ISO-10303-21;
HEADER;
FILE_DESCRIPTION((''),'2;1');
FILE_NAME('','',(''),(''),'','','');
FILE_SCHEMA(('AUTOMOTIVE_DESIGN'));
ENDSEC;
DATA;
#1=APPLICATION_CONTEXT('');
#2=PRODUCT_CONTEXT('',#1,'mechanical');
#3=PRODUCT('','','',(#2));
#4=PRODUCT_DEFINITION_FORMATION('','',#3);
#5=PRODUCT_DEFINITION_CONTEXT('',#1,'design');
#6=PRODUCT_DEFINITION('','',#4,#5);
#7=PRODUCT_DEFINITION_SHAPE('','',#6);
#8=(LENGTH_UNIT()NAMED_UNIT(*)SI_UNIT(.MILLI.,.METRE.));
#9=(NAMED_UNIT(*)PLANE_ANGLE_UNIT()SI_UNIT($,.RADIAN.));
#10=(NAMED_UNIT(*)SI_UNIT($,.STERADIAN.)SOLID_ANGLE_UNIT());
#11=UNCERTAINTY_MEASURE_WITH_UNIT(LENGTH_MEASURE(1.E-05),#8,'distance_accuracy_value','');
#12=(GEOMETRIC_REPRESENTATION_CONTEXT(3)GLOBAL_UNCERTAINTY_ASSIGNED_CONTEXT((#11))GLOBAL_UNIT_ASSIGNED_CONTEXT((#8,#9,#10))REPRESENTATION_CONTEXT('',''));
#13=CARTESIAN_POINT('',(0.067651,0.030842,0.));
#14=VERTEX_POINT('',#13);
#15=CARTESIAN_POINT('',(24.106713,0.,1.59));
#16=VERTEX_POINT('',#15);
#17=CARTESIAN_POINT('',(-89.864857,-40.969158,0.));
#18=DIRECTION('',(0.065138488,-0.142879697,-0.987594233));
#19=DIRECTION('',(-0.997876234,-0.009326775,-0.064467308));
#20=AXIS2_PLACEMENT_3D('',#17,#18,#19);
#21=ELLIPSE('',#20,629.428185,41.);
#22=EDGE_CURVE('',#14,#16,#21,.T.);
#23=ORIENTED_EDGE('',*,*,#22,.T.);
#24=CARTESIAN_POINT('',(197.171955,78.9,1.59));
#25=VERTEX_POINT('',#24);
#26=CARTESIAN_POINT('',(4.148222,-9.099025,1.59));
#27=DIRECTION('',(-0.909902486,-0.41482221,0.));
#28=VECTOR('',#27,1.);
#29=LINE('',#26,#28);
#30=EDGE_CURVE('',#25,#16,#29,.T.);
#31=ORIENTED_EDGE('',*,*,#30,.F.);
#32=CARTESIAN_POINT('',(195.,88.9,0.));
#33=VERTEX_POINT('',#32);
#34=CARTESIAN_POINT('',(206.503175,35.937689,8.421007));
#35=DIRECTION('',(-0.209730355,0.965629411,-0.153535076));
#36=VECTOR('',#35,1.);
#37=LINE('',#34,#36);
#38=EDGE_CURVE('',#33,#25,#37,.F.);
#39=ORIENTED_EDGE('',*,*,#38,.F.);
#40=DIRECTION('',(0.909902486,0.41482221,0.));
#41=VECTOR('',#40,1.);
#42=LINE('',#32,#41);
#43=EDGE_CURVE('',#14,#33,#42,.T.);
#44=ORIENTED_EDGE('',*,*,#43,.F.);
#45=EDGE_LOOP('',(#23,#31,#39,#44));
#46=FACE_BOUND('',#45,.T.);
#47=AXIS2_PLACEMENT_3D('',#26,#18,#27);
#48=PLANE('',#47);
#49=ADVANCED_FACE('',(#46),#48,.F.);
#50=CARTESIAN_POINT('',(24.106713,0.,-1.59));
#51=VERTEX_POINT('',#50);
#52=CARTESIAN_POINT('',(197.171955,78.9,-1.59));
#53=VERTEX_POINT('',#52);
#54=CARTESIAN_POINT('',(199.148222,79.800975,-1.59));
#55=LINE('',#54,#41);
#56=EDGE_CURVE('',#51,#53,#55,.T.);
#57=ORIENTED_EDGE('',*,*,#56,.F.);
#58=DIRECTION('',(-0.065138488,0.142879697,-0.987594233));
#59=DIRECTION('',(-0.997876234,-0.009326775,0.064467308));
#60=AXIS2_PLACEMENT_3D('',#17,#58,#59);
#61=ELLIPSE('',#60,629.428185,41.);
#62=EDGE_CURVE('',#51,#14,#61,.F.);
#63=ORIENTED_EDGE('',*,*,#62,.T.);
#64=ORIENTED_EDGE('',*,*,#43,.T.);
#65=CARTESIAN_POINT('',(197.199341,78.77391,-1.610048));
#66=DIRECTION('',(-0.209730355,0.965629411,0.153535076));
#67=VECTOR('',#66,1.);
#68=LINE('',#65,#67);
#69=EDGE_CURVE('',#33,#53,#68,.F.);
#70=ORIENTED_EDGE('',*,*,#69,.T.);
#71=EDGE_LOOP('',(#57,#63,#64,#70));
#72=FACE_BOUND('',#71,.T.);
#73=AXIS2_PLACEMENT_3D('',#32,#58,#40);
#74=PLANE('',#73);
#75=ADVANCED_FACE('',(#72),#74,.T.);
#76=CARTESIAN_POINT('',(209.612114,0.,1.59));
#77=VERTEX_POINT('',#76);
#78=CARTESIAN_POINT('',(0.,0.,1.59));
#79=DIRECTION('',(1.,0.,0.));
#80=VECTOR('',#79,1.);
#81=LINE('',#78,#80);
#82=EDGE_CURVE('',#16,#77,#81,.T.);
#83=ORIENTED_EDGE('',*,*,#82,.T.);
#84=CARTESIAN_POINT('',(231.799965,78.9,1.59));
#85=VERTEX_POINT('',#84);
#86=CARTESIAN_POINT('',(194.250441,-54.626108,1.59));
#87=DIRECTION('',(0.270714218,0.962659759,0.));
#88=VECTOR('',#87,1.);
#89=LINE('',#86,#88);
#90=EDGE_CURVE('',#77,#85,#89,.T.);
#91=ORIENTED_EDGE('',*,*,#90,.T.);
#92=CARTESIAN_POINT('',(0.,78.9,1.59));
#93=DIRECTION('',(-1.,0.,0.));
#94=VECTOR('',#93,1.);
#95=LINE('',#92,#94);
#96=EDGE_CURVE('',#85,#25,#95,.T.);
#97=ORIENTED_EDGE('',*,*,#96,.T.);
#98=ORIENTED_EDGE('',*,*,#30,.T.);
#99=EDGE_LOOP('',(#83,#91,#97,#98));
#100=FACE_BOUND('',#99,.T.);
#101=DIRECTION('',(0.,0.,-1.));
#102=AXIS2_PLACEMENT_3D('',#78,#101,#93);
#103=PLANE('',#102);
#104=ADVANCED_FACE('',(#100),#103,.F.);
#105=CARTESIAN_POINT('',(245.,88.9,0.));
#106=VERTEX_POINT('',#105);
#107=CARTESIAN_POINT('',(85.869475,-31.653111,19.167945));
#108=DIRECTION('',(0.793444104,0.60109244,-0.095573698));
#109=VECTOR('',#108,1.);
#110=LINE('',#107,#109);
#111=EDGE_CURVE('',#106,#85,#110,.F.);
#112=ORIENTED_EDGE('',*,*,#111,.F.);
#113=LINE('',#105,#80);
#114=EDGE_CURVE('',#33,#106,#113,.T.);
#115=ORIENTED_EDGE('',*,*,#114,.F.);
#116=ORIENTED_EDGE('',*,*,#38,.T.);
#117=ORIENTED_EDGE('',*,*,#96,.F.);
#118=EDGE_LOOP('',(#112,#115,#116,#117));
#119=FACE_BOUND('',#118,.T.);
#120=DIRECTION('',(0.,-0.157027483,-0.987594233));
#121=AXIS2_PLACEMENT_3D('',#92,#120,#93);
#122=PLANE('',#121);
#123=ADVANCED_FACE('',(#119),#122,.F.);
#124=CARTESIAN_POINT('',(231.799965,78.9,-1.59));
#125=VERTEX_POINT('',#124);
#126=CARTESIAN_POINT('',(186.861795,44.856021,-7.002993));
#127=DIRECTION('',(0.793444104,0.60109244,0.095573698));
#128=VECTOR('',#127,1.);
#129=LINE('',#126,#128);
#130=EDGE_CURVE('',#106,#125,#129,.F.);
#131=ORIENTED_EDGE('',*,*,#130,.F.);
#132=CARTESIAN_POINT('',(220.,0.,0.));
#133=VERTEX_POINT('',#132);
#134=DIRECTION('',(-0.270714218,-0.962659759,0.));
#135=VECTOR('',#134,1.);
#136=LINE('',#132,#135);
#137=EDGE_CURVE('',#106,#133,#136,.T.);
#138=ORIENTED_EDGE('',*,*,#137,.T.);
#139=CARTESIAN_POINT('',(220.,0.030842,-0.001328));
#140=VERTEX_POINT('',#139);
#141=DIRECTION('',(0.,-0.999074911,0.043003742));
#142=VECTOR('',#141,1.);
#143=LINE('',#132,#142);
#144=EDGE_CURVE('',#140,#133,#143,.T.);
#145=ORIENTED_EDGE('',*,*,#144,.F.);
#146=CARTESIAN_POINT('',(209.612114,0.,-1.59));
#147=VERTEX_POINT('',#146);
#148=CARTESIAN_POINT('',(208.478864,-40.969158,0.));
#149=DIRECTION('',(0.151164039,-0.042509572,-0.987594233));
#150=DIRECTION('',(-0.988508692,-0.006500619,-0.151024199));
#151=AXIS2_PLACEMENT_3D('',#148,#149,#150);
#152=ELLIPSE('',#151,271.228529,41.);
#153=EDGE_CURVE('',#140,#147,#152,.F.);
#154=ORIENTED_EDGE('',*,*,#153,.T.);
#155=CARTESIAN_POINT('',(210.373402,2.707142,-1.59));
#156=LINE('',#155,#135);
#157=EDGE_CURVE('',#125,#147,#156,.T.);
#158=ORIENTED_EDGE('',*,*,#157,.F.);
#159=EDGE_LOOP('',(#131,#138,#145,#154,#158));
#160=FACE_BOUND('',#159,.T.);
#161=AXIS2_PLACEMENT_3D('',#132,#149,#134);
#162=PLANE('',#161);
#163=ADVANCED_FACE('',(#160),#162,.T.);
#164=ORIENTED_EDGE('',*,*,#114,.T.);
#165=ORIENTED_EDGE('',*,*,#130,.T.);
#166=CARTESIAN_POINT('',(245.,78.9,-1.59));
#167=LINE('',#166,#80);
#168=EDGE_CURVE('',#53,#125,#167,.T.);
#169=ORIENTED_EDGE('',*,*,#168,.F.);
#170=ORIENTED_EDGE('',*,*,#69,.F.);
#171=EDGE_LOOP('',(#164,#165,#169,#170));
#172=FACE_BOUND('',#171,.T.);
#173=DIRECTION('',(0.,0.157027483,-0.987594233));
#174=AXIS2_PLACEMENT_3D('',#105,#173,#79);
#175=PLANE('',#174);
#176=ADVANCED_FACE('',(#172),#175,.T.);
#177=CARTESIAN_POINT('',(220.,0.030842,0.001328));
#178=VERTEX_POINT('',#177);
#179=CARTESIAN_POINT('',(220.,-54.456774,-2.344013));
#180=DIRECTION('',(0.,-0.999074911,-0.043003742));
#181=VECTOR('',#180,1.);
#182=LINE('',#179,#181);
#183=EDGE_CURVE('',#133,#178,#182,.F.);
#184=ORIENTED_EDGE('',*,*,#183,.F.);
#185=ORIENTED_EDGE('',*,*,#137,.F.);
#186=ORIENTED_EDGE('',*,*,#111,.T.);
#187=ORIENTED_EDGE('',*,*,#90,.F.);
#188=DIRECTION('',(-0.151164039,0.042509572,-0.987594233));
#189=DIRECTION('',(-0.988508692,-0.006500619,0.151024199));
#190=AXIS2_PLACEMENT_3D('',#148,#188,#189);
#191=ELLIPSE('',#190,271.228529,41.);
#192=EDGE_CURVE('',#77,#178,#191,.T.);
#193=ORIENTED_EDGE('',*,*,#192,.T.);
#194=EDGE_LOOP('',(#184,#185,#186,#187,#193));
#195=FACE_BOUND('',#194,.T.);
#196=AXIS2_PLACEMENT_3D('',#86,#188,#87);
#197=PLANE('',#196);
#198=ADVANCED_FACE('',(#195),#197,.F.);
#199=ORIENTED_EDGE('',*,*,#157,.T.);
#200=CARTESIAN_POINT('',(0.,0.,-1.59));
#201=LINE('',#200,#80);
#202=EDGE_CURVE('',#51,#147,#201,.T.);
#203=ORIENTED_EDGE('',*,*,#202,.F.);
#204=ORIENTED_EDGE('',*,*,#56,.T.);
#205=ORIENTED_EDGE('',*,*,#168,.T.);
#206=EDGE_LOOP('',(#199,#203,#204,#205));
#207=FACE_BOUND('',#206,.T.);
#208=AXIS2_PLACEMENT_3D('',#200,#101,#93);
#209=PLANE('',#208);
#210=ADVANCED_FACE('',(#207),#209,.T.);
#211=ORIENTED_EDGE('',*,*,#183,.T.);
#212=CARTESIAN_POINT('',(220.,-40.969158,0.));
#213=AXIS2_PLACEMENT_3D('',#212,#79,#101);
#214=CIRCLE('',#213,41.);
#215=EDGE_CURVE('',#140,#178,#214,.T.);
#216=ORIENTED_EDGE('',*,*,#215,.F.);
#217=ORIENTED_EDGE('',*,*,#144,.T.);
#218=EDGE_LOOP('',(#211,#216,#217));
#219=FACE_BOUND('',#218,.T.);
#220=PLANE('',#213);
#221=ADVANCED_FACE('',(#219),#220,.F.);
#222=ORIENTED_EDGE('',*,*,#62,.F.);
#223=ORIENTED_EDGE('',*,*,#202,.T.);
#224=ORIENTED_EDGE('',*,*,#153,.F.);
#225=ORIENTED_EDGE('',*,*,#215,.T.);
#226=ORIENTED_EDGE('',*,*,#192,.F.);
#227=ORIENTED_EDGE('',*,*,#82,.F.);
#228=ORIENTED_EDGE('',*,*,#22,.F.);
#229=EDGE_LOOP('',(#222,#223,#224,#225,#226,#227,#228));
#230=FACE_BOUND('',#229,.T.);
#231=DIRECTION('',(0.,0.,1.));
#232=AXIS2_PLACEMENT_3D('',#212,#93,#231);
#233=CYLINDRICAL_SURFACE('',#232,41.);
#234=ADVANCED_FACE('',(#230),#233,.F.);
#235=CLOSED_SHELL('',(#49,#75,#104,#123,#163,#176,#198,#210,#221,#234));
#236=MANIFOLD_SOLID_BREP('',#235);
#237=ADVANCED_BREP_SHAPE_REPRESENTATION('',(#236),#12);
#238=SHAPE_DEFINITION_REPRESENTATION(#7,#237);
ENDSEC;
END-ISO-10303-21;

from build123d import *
from OCP.BRepFilletAPI import BRepFilletAPI_MakeChamfer

# Parameters (mm, degrees)
BOSS_EXTRUDE1_DEPTH = 1.59
CHAMFER1_SIZE       = 1.59
CHAMFER1_SIZE2      = 10
CHAMFER2_SIZE       = 10
CHAMFER2_SIZE_2     = 1.59
SKETCH2_R           = 41
CUT_EXTRUDE1_DEPTH  = 220


with BuildPart() as part:
    # Sketch1 → Boss-Extrude1 (new, symmetric)
    with BuildSketch(Plane.XY):
        Polygon((0, 0), (220, 0), (245, 88.9), (195, 88.9), align=None)
    extrude(amount=BOSS_EXTRUDE1_DEPTH, both=True)

    # Chamfer1: one chamfer whose edges measure the first distance from different faces: ONE call of the kernel's chamfer builder (chamfer() names one face for all edges)
    chamfer1_edges_1 = [part.edges().sort_by_distance(p)[0] for p in [
        (232.5, 44.45, 1.59),
    ]]
    chamfer1_side_1 = [part.faces().sort_by_distance(p)[0] for p in [
        (232.5, 44.45, 0),
    ]]
    chamfer1_edges_2 = [part.edges().sort_by_distance(p)[0] for p in [
        (220, 88.9, 1.59),
    ]]
    chamfer1_side_2 = [part.faces().sort_by_distance(p)[0] for p in [
        (220, 88.9, 0),
    ]]
    chamfer1_edges_3 = [part.edges().sort_by_distance(p)[0] for p in [
        (97.5, 44.45, 1.59),
    ]]
    chamfer1_side_3 = [part.faces().sort_by_distance(p)[0] for p in [
        (97.5, 44.45, 0),
    ]]
    chamfer1 = BRepFilletAPI_MakeChamfer(part.part.solid().wrapped)
    for e in chamfer1_edges_1:
        chamfer1.Add(CHAMFER1_SIZE, CHAMFER1_SIZE2, e.wrapped, chamfer1_side_1[0].wrapped)  # the first distance lies on this face
    for e in chamfer1_edges_2:
        chamfer1.Add(CHAMFER1_SIZE, CHAMFER1_SIZE2, e.wrapped, chamfer1_side_2[0].wrapped)  # the first distance lies on this face
    for e in chamfer1_edges_3:
        chamfer1.Add(CHAMFER1_SIZE, CHAMFER1_SIZE2, e.wrapped, chamfer1_side_3[0].wrapped)  # the first distance lies on this face
    add(Compound.cast(chamfer1.Shape()), mode=Mode.REPLACE)

    # Chamfer2
    # the kernel refuses this chamfer: 10, 1.59 mm, written as the material it takes off along each edge
    with BuildSketch(Plane(origin=(218.64660826, 99.680428074, -1.59), x_dir=(0.41481463774773214, -0.9098858758246093, -0.006042291378384615), z_dir=(-0.9099024859208529, -0.41482221024801963, 0))) as chamfer2_piece_1:
        Polygon((CHAMFER2_SIZE * 0.999981745191, CHAMFER2_SIZE * 0.00604229137838), (-CHAMFER2_SIZE_2 * 0.00604229137839, CHAMFER2_SIZE_2 * 0.999981745191), (0, 0), align=None)
    extrude(amount=266.284816527, mode=Mode.SUBTRACT)
    with BuildSketch(Plane(origin=(270.98806864, 88.9, -1.59), x_dir=(0, -0.9999817451908304, -0.006042291378384616), z_dir=(-1, 0, 0))) as chamfer2_piece_2:
        Polygon((CHAMFER2_SIZE * 0.999981745191, CHAMFER2_SIZE * 0.00604229137838), (-CHAMFER2_SIZE_2 * 0.00604229137838, CHAMFER2_SIZE_2 * 0.999981745191), (0, 0), align=None)
    extrude(amount=101.976137281, mode=Mode.SUBTRACT)
    with BuildSketch(Plane(origin=(212.96466032, -25.017667902, -1.59), x_dir=(0.22378185481817084, -0.06293078032007055, 0.9726054690070615), z_dir=(0.2707142180235852, 0.9626597592918689, 0))) as chamfer2_piece_3:
        Polygon((CHAMFER2_SIZE_2 * 0.972605469007, -CHAMFER2_SIZE_2 * 0.232462043477), (-CHAMFER2_SIZE * 0.232462043477, -CHAMFER2_SIZE * 0.972605469007), (0, 0), align=None)
    extrude(amount=144.324445333, mode=Mode.SUBTRACT)

    # Sketch2 → Cut-Extrude1 (cut)
    with BuildSketch(Plane(origin=(0, 0, 0), x_dir=(0, 0, -1), z_dir=(1, 0, 0))):
        with Locations((0, -40.969157912)):
            Circle(SKETCH2_R)
    extrude(amount=CUT_EXTRUDE1_DEPTH, mode=Mode.SUBTRACT)


solid = part.part
